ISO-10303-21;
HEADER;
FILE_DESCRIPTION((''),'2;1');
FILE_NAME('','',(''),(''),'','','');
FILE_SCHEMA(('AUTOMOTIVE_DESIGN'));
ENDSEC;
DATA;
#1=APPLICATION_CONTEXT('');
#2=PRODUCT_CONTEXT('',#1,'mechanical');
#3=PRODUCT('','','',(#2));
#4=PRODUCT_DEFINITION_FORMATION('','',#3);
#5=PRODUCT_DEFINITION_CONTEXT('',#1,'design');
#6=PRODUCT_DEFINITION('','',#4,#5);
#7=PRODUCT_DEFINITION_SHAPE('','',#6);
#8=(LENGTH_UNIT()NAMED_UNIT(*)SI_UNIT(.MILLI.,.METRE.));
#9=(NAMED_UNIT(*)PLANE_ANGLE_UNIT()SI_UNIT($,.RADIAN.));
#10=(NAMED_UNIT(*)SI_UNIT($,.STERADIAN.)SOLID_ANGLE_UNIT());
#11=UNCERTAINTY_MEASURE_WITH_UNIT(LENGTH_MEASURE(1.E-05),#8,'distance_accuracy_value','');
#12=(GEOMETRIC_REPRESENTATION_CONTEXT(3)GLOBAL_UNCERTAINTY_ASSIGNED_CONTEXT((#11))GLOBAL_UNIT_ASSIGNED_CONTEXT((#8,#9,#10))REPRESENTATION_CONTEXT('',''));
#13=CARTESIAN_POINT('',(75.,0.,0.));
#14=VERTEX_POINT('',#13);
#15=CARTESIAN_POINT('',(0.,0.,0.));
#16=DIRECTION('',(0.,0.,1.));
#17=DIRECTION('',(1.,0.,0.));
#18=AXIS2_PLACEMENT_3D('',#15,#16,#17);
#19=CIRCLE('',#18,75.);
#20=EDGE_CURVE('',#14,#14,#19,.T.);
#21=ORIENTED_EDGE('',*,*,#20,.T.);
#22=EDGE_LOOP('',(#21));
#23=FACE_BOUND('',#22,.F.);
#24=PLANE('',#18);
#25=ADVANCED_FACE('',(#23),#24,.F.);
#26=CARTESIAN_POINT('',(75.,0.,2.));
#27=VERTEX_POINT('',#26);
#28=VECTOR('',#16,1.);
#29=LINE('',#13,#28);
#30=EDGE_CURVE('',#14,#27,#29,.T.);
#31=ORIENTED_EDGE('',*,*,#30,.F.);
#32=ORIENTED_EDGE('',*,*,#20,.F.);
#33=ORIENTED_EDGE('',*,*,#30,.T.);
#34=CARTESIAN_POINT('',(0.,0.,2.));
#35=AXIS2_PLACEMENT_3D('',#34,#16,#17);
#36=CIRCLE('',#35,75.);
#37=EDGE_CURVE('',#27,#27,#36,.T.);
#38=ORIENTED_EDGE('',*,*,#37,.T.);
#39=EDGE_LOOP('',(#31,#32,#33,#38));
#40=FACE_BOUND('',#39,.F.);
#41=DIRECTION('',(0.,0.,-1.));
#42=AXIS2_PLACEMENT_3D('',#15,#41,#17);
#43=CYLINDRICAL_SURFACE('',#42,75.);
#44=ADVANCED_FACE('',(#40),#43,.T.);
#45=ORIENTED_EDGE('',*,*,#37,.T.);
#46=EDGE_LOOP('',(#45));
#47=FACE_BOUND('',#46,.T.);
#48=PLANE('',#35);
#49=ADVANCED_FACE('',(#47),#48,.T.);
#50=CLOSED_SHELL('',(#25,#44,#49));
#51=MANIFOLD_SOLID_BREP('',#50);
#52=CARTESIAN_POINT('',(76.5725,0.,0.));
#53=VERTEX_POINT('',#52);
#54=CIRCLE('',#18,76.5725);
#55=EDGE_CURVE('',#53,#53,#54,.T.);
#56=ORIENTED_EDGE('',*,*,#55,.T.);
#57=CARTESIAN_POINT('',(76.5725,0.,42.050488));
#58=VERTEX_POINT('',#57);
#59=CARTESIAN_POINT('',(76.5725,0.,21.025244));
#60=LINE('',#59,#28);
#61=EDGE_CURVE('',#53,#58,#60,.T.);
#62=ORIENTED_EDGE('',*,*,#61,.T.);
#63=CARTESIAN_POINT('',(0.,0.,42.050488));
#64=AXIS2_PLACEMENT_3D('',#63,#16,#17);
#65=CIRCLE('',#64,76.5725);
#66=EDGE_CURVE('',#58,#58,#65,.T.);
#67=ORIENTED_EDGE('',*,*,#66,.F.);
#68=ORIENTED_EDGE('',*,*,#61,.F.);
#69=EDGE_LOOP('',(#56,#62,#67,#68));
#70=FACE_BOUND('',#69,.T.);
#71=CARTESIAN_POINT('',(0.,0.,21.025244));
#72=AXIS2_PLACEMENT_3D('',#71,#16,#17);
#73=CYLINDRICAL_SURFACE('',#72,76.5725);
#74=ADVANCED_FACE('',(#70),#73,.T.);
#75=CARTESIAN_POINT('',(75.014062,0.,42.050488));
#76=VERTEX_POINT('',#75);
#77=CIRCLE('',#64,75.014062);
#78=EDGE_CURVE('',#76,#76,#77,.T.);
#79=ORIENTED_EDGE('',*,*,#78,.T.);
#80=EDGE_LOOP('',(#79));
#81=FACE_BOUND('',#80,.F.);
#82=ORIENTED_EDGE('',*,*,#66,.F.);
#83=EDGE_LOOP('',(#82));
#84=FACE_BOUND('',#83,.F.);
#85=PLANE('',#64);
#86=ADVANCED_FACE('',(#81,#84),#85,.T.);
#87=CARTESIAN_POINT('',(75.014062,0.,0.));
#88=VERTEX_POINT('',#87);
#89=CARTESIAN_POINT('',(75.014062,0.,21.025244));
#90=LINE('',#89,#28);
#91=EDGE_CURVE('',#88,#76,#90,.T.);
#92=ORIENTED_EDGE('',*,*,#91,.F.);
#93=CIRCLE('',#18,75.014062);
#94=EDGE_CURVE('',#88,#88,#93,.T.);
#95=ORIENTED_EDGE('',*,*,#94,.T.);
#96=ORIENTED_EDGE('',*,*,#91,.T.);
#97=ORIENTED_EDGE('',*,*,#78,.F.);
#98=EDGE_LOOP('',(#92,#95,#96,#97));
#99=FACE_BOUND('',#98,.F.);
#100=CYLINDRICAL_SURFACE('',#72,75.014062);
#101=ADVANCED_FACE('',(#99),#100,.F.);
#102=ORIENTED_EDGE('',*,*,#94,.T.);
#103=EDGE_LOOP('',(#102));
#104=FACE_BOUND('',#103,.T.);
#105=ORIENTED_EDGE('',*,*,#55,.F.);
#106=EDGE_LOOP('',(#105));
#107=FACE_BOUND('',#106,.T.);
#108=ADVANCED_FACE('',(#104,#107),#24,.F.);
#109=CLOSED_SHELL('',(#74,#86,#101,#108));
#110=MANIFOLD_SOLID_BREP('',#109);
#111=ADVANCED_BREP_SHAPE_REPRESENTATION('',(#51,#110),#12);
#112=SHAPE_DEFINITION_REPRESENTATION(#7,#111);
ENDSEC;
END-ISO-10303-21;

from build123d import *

# Parameters (mm, degrees)
F0_R     = 75
F1_DEPTH = 2
F2_W     = 1.5584379435
F2_H     = 42.0504882932


# Not quite as in the source:
# - a feature names something its author has since deleted; it is built from what else it names


with BuildPart() as f1:
    # F0 (on Top) → F1 (new body)
    with BuildSketch(Plane.XY):
        Circle(F0_R)
    extrude(amount=F1_DEPTH)


with BuildPart() as f3:
    # F2 (on Front) → F3 (revolve)
    with BuildSketch(Plane.XZ):
        with Locations((75.7932811975, 21.0252441466)):
            Rectangle(F2_W, F2_H)
    revolve(axis=Axis((0, 0, 2), (0, 0, 1)))


solid = Compound([f1.part, f3.part])
